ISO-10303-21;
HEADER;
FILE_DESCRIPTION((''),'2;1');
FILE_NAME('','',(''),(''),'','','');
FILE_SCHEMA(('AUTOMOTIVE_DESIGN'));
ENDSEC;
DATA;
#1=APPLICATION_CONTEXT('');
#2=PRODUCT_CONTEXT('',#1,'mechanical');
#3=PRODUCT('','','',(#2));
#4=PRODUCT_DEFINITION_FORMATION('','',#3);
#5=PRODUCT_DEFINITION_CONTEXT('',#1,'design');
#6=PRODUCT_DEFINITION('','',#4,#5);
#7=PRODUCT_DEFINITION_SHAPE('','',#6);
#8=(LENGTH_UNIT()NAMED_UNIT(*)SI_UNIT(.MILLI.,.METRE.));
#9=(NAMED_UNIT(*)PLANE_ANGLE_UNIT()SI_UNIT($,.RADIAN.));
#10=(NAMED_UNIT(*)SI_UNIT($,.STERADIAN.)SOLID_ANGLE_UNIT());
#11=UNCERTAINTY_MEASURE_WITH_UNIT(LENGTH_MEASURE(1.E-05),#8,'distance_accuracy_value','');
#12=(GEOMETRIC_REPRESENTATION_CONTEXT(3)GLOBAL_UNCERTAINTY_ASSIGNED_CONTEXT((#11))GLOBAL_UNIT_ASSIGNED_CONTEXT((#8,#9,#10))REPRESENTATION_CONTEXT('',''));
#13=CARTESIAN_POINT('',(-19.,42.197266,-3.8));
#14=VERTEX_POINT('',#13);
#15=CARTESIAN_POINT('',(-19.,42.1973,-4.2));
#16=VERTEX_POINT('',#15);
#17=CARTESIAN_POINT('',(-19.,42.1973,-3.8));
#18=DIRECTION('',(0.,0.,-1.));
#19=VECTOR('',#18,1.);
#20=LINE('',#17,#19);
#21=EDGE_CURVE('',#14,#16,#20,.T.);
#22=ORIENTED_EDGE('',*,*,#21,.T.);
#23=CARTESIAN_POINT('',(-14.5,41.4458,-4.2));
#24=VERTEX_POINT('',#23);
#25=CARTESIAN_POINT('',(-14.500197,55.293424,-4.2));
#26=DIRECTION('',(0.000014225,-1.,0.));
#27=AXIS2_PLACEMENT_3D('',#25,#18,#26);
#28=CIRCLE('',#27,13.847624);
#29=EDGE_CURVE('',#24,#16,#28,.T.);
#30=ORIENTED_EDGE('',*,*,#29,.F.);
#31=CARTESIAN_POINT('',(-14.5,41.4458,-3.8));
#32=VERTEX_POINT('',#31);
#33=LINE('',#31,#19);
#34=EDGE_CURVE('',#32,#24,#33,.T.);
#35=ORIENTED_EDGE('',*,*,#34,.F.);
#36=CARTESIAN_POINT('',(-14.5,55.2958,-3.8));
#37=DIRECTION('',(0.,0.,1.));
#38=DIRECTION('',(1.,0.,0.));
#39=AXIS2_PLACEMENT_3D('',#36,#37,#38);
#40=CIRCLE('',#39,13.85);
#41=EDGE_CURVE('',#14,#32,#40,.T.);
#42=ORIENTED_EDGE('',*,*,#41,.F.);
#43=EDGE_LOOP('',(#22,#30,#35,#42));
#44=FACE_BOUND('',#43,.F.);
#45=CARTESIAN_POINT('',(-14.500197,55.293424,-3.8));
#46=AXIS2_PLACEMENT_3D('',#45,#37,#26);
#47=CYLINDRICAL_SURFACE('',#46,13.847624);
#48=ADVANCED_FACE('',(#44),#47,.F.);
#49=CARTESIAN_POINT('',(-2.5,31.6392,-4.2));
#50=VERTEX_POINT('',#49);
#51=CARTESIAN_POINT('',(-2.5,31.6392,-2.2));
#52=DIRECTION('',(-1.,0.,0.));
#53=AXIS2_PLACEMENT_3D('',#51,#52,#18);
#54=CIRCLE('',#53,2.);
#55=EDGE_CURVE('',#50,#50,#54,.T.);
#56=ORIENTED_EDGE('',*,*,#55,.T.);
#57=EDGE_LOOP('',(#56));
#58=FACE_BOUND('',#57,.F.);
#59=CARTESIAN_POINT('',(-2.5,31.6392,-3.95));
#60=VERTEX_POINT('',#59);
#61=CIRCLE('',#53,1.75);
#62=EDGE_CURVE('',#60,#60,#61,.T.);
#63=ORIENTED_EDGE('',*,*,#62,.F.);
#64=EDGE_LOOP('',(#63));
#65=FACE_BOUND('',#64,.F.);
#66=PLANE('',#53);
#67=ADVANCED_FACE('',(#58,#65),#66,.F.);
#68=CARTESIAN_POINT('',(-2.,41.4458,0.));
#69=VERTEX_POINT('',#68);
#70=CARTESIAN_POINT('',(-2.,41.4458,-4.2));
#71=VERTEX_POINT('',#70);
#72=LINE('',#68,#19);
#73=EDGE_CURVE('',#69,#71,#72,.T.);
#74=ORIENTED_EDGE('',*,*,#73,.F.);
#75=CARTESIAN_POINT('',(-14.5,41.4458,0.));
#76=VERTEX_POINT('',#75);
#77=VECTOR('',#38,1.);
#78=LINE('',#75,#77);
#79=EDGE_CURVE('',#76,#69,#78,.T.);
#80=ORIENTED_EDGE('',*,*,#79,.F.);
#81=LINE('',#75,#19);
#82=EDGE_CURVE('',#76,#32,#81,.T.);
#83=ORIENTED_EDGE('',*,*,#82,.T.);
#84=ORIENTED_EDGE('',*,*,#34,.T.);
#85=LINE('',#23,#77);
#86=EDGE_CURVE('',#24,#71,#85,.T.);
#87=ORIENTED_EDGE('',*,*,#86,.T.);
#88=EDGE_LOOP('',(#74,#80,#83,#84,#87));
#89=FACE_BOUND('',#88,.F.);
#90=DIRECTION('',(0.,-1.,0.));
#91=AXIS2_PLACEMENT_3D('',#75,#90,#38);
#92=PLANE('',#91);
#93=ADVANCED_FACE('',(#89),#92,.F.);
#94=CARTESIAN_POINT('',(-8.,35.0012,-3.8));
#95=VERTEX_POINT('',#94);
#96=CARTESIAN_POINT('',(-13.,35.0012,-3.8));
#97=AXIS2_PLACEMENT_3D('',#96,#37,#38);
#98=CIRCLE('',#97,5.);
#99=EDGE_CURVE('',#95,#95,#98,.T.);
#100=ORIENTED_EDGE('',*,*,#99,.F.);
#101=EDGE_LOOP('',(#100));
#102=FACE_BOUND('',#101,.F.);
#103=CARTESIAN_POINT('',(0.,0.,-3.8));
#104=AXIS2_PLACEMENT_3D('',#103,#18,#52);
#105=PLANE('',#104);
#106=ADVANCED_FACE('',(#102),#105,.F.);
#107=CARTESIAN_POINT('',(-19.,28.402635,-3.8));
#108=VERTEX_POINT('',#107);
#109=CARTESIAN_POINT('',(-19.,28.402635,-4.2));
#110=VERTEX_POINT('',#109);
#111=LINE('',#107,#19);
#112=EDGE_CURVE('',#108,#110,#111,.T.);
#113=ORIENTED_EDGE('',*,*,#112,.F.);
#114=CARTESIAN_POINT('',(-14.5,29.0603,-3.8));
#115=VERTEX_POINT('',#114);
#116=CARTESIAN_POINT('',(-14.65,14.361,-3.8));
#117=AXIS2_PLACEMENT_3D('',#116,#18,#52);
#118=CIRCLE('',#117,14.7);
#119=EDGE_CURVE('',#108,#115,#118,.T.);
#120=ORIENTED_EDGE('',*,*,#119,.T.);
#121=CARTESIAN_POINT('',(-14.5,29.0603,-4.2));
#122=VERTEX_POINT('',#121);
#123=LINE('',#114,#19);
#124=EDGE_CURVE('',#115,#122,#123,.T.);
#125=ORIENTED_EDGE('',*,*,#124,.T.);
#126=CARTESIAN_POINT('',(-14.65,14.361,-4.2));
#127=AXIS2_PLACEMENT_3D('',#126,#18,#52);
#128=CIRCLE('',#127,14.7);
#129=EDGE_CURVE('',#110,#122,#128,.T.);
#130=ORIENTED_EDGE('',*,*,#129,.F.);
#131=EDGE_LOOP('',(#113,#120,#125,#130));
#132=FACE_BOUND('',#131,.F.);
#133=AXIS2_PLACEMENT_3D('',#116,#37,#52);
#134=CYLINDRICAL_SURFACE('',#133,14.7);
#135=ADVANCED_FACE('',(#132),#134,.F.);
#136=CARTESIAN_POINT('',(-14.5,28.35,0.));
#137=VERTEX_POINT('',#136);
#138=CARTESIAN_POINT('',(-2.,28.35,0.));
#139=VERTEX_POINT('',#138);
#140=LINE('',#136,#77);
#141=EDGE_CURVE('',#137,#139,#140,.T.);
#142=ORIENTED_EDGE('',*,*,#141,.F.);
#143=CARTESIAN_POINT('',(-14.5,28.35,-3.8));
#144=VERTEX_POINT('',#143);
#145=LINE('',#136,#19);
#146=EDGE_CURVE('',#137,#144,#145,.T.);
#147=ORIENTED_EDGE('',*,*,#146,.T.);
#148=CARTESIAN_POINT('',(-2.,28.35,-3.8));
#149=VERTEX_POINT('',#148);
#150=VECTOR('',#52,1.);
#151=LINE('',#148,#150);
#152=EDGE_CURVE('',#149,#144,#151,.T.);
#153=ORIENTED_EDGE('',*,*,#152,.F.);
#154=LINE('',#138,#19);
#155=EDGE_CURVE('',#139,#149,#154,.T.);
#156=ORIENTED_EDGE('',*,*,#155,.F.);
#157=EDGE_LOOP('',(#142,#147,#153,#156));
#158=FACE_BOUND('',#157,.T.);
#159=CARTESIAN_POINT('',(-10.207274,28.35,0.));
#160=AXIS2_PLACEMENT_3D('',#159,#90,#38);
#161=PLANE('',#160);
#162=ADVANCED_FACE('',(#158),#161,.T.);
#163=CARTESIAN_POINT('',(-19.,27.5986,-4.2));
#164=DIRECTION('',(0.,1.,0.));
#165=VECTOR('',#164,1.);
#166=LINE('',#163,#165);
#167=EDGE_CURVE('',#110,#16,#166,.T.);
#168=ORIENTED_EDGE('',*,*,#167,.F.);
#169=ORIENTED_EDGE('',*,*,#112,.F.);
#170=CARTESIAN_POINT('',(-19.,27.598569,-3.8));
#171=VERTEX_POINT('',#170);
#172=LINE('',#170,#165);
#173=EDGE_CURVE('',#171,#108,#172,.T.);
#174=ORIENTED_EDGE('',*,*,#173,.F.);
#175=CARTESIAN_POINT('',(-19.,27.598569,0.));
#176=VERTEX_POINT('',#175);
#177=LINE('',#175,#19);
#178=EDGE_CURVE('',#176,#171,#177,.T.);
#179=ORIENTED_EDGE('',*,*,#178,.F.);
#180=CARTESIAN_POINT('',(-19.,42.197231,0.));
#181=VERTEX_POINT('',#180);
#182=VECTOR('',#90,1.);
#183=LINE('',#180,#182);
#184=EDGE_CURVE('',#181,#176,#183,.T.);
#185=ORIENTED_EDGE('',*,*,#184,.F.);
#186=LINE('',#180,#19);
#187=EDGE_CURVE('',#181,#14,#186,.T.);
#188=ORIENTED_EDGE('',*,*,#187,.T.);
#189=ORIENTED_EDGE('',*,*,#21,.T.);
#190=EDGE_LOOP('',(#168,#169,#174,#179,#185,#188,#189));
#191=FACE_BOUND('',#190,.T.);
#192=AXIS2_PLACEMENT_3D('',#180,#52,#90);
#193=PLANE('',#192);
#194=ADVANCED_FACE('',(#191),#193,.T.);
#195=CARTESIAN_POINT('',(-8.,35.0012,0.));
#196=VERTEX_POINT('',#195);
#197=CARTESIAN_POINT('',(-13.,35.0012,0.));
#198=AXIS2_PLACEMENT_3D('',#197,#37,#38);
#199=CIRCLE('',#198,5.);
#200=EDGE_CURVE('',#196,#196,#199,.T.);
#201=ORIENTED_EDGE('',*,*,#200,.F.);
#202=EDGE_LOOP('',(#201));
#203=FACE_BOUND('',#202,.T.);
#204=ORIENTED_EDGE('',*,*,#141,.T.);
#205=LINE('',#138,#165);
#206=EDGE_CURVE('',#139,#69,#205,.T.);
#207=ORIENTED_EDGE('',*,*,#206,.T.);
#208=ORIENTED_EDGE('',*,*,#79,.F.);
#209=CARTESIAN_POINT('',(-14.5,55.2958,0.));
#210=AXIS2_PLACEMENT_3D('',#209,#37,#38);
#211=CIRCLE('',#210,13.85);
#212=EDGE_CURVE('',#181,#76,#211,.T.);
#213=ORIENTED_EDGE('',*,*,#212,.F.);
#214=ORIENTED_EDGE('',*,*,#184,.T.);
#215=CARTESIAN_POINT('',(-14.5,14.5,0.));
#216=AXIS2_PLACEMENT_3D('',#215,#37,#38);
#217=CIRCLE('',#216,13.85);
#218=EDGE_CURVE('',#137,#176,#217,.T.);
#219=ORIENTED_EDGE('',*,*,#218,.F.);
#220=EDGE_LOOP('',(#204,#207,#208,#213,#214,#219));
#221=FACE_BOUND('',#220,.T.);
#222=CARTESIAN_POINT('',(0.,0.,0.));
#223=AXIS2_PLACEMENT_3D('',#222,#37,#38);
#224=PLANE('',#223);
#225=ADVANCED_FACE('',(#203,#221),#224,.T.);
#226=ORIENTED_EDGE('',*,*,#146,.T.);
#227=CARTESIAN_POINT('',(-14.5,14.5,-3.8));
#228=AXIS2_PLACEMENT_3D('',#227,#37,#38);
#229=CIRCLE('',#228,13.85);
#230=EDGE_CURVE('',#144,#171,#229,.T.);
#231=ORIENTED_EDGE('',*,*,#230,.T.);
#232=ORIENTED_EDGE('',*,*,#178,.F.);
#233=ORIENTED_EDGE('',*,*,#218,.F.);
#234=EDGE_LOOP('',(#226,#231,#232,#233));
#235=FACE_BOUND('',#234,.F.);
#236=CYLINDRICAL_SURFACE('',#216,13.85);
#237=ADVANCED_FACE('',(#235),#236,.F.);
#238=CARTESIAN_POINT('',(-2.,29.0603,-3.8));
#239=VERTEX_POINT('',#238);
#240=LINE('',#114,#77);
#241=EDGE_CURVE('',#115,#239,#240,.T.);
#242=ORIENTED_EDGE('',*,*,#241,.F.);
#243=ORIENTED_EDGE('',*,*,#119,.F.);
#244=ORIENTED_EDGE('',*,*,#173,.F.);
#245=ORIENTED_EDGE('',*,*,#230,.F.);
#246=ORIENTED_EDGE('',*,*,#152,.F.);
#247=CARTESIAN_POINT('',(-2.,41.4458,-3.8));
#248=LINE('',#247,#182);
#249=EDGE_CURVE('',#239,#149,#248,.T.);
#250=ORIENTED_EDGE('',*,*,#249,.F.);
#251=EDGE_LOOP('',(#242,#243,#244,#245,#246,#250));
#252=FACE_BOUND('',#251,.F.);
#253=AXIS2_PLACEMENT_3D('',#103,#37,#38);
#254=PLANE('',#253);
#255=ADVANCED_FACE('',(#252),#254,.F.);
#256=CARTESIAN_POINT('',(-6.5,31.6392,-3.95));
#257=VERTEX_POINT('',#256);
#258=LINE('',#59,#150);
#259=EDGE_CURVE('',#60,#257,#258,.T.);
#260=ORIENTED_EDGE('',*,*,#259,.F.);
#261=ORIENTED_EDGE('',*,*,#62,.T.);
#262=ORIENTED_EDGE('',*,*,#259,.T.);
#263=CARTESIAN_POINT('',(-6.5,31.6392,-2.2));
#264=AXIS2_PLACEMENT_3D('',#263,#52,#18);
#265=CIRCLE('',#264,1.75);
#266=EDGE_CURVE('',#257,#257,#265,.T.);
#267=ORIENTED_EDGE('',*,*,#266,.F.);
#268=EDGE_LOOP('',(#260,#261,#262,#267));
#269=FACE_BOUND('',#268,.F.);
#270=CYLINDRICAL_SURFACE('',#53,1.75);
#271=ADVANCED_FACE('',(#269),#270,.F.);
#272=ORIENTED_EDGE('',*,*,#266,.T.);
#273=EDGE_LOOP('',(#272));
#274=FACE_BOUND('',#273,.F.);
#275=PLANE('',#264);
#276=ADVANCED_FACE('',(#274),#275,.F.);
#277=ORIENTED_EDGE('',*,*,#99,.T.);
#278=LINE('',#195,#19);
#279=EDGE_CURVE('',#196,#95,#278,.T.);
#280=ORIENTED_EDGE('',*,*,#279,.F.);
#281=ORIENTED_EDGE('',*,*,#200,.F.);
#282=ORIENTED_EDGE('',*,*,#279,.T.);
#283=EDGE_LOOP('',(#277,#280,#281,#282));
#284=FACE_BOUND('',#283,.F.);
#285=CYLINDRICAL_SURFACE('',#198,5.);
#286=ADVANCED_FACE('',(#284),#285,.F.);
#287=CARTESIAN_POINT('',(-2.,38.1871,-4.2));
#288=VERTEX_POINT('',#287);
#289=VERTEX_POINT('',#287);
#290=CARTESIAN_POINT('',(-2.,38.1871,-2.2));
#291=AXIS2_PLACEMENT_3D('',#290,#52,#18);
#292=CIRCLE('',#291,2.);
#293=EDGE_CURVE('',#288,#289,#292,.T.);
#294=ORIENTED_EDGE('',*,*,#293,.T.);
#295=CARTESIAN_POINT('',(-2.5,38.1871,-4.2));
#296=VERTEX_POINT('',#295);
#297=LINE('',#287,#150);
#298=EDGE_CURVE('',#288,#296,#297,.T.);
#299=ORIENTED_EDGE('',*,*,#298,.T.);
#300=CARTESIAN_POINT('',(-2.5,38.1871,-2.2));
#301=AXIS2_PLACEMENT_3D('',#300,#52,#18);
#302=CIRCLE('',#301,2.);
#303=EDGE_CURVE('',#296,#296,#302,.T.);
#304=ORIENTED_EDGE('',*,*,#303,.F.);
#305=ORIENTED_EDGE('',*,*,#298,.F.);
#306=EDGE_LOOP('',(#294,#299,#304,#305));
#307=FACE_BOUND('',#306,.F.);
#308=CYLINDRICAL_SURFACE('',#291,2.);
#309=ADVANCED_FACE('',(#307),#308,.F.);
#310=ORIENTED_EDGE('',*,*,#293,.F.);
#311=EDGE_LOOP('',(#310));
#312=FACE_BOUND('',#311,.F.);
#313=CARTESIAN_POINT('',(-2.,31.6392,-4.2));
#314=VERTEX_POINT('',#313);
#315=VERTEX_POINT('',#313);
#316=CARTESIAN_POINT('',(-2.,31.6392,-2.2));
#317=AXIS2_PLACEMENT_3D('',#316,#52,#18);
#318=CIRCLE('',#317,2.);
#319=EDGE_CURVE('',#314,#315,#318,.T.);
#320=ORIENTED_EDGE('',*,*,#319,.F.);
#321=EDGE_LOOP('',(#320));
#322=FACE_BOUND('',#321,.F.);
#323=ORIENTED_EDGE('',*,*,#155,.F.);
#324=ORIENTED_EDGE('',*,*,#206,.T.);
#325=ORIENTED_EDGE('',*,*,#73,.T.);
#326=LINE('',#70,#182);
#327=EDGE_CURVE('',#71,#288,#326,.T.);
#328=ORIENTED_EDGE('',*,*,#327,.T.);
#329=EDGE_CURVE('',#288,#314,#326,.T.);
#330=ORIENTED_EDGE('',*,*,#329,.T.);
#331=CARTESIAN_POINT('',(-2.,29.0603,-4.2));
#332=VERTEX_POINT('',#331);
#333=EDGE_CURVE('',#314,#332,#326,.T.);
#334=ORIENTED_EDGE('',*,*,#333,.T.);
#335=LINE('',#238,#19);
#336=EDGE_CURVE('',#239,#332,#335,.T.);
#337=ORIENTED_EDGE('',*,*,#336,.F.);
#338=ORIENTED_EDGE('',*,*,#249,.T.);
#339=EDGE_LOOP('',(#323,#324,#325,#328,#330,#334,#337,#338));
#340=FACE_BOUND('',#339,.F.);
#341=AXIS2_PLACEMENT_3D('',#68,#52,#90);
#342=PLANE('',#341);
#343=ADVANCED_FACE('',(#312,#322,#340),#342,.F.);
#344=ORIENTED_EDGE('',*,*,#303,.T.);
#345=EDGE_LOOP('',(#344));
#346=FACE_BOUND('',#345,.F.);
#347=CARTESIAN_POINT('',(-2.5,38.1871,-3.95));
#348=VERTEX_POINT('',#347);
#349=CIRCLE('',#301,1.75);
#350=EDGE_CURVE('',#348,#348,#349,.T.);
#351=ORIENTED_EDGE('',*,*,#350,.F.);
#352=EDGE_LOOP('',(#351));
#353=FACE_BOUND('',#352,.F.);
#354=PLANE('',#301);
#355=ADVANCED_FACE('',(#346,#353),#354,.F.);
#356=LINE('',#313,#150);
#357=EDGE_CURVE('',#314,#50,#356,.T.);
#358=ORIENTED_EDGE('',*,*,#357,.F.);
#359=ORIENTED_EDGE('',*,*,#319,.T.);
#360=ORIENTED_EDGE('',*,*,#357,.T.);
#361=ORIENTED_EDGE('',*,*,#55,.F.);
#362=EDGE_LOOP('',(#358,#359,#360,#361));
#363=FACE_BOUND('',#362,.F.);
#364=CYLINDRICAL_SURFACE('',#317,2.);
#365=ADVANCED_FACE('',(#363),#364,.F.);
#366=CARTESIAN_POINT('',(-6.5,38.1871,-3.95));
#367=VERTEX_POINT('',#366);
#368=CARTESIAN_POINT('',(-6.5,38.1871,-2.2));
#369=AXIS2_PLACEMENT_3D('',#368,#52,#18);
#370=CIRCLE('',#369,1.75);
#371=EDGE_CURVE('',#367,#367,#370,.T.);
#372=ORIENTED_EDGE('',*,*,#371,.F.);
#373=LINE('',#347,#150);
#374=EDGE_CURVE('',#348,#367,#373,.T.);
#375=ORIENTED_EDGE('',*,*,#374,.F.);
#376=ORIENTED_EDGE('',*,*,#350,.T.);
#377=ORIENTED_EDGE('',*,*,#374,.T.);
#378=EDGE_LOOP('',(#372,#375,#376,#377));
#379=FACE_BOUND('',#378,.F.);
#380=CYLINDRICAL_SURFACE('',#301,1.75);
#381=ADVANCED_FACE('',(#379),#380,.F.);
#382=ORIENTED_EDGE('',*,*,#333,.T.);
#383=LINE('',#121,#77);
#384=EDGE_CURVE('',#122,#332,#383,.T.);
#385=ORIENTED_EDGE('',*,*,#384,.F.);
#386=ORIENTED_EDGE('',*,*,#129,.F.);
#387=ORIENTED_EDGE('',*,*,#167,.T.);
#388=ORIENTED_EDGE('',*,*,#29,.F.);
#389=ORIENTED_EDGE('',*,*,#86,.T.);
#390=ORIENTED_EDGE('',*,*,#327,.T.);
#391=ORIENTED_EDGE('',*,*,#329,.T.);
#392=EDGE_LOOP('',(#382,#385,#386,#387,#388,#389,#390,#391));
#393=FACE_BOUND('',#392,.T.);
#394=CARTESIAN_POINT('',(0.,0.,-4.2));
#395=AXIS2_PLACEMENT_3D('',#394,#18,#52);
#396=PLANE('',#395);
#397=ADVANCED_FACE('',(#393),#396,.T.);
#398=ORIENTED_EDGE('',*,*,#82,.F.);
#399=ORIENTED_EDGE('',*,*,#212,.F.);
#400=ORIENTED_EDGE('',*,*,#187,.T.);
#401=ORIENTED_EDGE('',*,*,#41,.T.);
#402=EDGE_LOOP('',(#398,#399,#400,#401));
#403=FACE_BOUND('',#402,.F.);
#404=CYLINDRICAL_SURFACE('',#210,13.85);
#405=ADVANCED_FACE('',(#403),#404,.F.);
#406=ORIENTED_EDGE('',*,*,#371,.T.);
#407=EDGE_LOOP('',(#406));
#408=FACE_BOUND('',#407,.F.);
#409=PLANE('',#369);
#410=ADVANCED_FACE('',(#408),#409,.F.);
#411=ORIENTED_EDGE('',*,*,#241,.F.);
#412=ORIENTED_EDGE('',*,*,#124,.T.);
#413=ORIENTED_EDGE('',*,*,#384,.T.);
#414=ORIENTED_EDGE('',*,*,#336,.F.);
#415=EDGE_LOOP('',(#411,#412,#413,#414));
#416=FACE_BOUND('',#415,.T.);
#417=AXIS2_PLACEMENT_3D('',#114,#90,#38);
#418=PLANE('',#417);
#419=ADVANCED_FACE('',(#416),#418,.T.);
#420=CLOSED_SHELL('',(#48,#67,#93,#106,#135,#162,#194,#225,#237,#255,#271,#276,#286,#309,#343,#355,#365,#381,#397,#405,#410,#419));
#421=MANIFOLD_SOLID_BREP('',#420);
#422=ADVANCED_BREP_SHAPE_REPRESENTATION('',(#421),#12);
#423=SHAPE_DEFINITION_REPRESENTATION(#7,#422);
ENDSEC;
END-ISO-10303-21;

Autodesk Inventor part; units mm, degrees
ref_plane "YZ Plane" through (0, 0, 0) normal (1, 0, 0) x (0, 1, 0)
ref_plane "XZ Plane" through (0, 0, 0) normal (0, 1, 0) x (-1, 0, 0)
ref_plane "XY Plane" through (0, 0, 0) normal (0, 0, 1) x (1, 0, 0)
sketch "Sketch1" plane through (0, 0, 0) normal (0, 0, 1) x (1, 0, 0)
  circle A0 centre (-14.5, 55.2958) radius 13.85 projected
  circle A1 centre (-14.5, 55.2958) radius 14.5 projected
  circle A2 centre (-14.5, 14.5) radius 13.85 projected
  circle A3 centre (-14.5, 14.5) radius 14.5 projected
  circle A4 centre (-13, 35.0012) radius 5 projected
  line L0 (0, 65.2958) -> (-19, 65.2958)
  line L1 (-19, 65.2958) -> (-19, -1.7042)
  line L2 (-19, -1.7042) -> (0, -1.7042)
  line L3 (0, -1.7042) -> (0, 65.2958)
  line L4 (-2, 65.2958) -> (-2, -1.7042)
  line L5 (-14.5, 41.4458) -> (-2, 41.4458)
  line L6 (-14.5, 40.7958) -> (-2, 40.7958)
  line L7 (-14.5, 28.35) -> (-2, 28.35)
  line L8 (-14.5, 29) -> (-2, 29)
  point P0 (0, 0)
  point P1 (-19, 42.1973)
  point P2 (-19, 27.5986)
  point P3 (-19, 28.284)
  point P4 (-19, 41.5118)
  dimension "d0" = 67
  dimension "d1" = 1
  dimension "d2" = 2
extrude "Extrusion1" add sketch "Sketch1" against normal blind 3.8 contours L5 A1 L1 A0 | L5 L4 L6 A1 | A1 L6 L4 L8 A3 L1 | A3 L7 A2 L1 | L4 L7 A3 L8
ref_plane "Work Plane7" through (0, 0, -3.8) normal (0, 0, -1) x (-1, 0, 0)
sketch "Sketch2" plane through (0, 0, -3.8) normal (0, 0, -1) x (-1, 0, 0)
  circle A0 centre (8.5216, 9.2187) radius 1.0564 projected
  circle A1 centre (20.7784, 19.5033) radius 1.0564 projected
  circle A2 centre (14.65, 14.361) radius 5 projected
  circle A3 centre (14.65, 14.361) radius 14 projected
  circle A4 centre (14.65, 14.361) radius 14.7 projected
  line L0 (2, 41.4458) -> (2, 28.35) projected
  line L1 (2, 28.35) -> (14.5, 28.35) projected
  arc A5 (19, 27.5986) -> (14.5, 28.35) centre (14.5, 14.5) ccw projected
  line L2 (19, 27.5986) -> (19, 42.1973) projected
  arc A6 (14.5, 41.4458) -> (19, 42.1973) centre (14.5, 55.2958) ccw projected
  line L3 (14.5, 41.4458) -> (2, 41.4458) projected
  circle A7 centre (13, 35.0012) radius 5 projected
  line L4 (14.5, 29.0603) -> (2, 29.0603)
  line L5 (2, 41.4458) -> (2, 28.35) projected
  line L6 (14.5, 29.0603) -> (14.5, 14.5)
  point P0 (0, 0)
  point P1 (2, 29.0603)
  point P2 (19, 28.4027)
extrude "Extrusion4" add sketch "Sketch2" along normal blind 0.4 contours A4 L4 L0 L3 A6 L2 | A7
sketch "Sketch3" plane through (-2, 28.35, 0) normal (1, 0, 0) x (0, 0, -1)
  line L0 (0, 0) -> (0, 13.0958) projected
  line L1 (0, 0) -> (3.8, 0) projected
  line L2 (0, 6.5784) -> (4.4, 6.5784)
  line L3 (0, 13.0958) -> (4.4, 6.5784)
  line L4 (4.4, 6.5784) -> (0, 0)
  line L5 (0, 6.5784) -> (2.2, 3.2892)
  line L6 (0, 6.5784) -> (2.2, 9.8371)
  line L7 (0, 13.0958) -> (4.2, 13.0958) projected
  line L8 (3.8, 0.7103) -> (3.8, 0) projected
  line L9 (3.8, 0.7103) -> (4.2, 0.7103) projected
  line L10 (4.2, 13.0958) -> (4.2, 0.7103) projected
  point P0 (0, -28.35)
  point P1 (5.9, 0.65)
  point P2 (5.9, 12.4458)
  dimension "d12" = 6.5784
hole "Hole1" at (-2, 38.1871, -2.2) at (-2, 31.6392, -2.2) direction (-1, 0, 0) diameter 3.5 depth 4.5 counterbore diameter 4 counterbore depth 0.5
properties part number "BearigHoldRight"
